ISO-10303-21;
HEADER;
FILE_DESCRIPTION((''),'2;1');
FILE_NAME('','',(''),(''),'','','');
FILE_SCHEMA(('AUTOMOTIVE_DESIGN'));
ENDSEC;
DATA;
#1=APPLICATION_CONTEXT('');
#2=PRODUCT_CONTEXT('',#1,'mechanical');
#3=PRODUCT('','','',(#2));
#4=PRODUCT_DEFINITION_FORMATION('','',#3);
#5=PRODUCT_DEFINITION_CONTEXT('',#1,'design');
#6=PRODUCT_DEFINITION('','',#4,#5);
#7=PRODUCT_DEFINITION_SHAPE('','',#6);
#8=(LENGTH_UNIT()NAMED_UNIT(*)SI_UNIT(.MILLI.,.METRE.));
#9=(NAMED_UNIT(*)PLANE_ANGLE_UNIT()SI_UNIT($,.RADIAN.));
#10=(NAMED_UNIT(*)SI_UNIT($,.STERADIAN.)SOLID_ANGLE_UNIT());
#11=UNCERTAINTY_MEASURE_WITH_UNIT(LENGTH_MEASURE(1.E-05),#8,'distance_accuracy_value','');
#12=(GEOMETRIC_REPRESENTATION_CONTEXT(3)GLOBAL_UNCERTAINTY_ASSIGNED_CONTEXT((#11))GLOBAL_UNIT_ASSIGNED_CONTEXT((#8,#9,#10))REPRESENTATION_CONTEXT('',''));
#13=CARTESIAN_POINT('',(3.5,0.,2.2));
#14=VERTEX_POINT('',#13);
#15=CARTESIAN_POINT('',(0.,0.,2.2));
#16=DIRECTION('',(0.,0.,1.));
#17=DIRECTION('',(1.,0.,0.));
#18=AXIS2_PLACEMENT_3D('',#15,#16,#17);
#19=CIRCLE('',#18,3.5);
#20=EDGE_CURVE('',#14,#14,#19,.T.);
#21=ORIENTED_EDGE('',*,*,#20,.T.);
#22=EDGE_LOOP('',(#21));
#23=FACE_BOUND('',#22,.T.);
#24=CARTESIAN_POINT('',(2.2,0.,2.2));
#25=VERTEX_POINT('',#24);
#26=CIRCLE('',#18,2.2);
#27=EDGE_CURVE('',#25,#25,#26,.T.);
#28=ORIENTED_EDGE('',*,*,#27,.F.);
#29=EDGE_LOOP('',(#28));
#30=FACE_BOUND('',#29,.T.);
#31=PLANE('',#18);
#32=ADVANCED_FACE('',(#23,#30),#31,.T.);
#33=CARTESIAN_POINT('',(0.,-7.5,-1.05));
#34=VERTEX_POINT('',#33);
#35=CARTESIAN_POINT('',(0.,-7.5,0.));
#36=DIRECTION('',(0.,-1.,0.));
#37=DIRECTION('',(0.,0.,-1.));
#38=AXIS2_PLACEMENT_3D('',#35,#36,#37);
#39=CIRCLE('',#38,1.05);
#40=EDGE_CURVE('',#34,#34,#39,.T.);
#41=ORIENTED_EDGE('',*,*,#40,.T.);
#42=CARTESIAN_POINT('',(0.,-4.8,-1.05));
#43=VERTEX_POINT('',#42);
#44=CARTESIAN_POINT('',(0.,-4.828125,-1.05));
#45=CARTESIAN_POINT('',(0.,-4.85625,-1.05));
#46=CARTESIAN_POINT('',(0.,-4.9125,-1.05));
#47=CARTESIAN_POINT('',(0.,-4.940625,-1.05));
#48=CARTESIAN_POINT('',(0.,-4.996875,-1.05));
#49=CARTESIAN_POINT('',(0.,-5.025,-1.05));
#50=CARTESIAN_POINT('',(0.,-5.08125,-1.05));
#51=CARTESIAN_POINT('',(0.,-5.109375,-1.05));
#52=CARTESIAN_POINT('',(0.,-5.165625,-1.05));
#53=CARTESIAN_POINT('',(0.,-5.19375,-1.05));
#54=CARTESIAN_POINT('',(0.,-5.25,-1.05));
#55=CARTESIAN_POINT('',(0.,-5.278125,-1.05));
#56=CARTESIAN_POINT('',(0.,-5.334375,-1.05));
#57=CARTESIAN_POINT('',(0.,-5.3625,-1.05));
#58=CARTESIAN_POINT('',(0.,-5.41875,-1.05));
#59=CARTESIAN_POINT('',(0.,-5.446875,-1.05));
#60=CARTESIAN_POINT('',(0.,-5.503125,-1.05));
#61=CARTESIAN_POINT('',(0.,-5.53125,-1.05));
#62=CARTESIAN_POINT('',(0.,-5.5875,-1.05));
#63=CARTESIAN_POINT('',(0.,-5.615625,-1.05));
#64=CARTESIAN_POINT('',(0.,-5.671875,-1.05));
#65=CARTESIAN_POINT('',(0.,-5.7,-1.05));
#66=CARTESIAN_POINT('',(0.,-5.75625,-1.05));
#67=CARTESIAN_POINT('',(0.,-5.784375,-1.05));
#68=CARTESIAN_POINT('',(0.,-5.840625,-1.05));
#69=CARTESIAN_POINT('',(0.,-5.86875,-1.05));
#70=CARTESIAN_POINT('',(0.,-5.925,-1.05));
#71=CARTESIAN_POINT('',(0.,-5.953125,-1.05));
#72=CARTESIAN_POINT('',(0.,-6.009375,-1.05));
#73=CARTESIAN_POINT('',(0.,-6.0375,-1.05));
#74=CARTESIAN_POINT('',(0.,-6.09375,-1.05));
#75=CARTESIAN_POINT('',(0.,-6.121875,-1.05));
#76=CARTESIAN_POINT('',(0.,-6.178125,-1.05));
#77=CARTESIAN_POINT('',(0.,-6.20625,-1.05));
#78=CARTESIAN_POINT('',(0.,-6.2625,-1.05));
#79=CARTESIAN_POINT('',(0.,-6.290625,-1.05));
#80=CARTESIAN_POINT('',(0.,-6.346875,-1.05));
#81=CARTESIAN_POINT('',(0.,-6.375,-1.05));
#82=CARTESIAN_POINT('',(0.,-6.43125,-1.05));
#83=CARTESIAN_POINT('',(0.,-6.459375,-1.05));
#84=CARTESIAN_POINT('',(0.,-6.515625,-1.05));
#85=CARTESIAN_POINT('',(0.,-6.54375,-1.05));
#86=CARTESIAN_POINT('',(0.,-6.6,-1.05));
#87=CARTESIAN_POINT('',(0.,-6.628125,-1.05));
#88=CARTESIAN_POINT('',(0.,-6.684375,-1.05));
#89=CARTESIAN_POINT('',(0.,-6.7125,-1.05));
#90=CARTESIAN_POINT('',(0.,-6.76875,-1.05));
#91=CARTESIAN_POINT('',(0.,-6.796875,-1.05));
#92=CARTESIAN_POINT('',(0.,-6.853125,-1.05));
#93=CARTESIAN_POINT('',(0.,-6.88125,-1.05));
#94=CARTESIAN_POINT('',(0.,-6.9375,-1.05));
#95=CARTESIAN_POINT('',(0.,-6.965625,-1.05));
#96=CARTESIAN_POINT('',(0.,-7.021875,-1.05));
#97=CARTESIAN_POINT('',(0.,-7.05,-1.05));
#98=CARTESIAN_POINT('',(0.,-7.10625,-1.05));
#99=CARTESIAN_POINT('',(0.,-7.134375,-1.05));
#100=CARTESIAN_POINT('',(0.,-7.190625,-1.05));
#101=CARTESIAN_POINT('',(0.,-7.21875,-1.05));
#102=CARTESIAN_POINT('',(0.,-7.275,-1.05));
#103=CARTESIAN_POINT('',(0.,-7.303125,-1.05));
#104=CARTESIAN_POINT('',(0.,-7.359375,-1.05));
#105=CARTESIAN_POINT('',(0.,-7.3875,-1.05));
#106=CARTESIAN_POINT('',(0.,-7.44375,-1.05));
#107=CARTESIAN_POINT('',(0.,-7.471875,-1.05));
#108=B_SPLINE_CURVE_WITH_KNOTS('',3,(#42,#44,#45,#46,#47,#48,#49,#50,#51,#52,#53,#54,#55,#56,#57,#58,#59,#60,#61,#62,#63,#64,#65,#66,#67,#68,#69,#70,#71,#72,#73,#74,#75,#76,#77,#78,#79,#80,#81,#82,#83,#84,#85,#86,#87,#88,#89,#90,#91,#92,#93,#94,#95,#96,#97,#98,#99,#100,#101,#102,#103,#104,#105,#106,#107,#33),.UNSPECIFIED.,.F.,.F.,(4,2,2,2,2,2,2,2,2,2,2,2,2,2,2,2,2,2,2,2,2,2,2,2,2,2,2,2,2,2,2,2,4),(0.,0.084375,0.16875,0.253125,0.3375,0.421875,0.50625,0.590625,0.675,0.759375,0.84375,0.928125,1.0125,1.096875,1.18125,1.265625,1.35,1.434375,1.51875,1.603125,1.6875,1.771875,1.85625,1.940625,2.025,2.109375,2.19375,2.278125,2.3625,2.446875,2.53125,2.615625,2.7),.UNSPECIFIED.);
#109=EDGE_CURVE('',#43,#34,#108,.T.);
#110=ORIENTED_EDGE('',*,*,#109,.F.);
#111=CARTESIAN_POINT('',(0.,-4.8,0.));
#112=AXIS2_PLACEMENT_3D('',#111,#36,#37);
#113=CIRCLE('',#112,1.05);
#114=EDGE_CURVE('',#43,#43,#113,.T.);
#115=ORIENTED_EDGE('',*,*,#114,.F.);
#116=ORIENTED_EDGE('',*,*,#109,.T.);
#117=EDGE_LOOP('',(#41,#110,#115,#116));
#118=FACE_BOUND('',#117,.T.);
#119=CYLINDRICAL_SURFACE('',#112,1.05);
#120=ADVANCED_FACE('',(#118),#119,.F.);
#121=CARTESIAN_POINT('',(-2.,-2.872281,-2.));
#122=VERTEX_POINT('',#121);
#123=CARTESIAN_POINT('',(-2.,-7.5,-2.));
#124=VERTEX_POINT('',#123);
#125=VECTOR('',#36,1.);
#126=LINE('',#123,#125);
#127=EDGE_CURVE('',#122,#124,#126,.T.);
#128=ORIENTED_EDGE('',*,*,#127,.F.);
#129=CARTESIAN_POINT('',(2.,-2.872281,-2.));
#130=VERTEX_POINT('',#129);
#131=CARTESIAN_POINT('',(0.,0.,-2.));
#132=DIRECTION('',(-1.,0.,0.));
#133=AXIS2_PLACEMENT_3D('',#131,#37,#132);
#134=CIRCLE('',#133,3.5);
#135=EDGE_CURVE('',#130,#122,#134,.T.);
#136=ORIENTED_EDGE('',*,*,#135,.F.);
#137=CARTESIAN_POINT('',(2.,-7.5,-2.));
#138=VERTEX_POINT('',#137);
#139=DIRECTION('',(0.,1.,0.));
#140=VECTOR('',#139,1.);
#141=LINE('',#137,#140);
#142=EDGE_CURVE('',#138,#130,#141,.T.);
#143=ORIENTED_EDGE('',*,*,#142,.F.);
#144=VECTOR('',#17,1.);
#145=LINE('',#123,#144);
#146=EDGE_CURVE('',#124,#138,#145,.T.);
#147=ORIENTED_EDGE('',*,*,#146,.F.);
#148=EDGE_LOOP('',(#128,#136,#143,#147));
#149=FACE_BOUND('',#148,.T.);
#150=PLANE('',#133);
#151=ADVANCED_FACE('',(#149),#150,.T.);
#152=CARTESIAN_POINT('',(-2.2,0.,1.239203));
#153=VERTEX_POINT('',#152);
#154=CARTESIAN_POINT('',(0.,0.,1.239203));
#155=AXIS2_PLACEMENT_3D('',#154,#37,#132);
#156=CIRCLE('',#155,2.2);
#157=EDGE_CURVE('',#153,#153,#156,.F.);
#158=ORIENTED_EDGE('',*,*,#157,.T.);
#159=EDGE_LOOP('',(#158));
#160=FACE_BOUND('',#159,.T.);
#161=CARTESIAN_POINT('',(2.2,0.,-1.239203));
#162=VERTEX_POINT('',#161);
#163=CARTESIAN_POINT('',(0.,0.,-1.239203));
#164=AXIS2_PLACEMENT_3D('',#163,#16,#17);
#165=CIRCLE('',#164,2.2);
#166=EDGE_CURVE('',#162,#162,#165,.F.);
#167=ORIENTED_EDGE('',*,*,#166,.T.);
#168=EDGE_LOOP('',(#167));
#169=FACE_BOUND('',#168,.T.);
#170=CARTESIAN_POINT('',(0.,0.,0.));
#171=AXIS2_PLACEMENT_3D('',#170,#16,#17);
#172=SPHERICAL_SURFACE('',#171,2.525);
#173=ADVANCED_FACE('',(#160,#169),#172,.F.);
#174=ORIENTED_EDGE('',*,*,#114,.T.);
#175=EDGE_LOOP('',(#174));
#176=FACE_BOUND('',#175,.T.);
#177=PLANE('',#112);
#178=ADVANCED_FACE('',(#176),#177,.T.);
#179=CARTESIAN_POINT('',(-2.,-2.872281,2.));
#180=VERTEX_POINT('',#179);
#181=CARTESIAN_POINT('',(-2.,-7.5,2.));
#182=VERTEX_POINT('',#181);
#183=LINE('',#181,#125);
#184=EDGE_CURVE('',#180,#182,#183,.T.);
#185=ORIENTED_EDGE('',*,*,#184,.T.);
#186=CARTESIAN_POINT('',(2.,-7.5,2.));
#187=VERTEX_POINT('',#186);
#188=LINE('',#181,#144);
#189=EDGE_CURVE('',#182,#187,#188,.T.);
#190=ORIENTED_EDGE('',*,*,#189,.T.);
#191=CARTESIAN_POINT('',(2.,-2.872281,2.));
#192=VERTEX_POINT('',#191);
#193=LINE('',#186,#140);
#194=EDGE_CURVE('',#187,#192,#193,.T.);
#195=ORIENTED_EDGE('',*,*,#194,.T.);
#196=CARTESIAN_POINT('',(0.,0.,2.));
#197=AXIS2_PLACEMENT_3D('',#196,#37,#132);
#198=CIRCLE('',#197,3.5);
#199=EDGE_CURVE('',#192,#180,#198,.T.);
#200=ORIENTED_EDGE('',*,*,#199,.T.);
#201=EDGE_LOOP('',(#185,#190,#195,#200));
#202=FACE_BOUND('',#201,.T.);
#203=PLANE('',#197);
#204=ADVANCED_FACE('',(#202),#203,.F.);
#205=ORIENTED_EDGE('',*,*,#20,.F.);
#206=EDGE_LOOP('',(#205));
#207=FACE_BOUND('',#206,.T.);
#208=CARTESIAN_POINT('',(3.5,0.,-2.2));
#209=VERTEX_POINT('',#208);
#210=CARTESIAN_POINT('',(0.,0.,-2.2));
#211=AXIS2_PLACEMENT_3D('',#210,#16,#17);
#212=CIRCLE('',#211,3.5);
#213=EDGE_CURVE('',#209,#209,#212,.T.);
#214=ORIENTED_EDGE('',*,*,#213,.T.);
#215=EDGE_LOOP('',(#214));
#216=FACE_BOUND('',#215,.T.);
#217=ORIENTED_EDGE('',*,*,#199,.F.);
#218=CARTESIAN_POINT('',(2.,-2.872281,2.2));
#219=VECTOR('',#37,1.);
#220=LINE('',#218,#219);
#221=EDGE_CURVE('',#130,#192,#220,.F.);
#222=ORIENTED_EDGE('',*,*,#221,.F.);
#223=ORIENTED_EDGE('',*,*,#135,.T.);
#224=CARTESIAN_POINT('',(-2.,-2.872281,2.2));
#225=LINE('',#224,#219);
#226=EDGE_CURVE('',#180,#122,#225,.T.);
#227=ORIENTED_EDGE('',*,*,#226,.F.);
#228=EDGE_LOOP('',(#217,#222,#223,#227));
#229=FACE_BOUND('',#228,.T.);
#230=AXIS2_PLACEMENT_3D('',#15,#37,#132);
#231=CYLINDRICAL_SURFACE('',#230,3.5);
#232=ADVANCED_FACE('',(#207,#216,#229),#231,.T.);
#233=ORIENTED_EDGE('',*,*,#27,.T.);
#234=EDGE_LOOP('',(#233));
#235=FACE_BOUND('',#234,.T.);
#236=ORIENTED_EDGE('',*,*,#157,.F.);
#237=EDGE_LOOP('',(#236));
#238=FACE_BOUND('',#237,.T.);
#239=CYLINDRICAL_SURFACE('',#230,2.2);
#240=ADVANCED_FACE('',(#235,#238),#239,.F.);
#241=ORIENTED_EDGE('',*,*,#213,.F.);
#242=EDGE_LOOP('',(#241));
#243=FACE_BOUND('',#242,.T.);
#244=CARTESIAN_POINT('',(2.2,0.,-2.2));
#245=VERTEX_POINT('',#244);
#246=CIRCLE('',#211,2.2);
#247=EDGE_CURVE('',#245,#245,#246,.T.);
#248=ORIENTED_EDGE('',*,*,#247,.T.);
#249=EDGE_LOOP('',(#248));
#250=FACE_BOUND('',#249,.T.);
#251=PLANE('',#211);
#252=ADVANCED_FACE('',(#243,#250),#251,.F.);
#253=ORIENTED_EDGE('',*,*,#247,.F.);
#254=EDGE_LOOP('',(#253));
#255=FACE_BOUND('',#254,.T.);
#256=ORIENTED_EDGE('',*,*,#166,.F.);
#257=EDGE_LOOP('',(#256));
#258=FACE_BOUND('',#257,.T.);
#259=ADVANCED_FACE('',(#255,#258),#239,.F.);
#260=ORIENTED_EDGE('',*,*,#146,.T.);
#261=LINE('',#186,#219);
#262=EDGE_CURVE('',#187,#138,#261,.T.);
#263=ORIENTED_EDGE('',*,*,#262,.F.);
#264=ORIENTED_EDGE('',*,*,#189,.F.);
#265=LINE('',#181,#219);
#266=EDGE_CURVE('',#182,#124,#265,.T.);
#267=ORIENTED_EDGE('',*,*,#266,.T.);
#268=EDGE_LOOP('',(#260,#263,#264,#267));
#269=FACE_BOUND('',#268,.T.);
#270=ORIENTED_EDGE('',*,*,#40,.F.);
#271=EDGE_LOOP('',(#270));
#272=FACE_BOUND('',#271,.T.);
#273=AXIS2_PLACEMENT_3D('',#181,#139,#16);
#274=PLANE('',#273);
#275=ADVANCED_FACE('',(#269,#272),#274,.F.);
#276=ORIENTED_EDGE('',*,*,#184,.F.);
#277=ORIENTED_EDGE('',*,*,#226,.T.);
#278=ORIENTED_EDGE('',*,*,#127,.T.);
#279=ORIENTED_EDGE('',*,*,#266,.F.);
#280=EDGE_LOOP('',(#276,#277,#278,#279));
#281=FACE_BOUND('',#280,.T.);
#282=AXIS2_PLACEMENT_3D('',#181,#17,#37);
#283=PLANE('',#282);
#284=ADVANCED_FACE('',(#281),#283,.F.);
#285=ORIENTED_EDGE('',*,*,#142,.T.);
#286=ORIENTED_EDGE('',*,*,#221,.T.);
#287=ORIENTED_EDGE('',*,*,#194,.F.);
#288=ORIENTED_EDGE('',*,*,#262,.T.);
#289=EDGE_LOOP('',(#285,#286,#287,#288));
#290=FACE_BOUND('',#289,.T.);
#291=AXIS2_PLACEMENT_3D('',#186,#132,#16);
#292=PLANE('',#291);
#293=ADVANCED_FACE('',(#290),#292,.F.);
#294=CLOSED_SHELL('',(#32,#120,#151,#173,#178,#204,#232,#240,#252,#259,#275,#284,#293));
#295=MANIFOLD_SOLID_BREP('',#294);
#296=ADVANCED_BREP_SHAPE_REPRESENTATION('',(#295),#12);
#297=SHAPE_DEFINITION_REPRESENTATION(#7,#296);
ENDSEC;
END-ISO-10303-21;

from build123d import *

# Parameters (mm, degrees)
SOCKET_OUTER_EYE_AND_MOUTHS_START = -2.2
SKETCH1_R                         = 3.5
SKETCH1_R_2                       = 2.2
SOCKET_OUTER_EYE_AND_MOUTHS_DEPTH = 4.4
ROD_CONNECTION_NECK_START         = -2
SKETCH2_W                         = 4
SKETCH2_H                         = 5.3
ROD_CONNECTION_NECK_DEPTH         = 4
SKETCH3_R                         = 1.05
D2P1_ROD_BOND_BORE_DEPTH          = 2.7


# Read off the part's stored shape, not the designer's step: Spherical_Socket_D5p05
with BuildPart() as part:
    # Sketch1 → Socket_Outer_Eye_And_Mouths (new body)
    with BuildSketch(Plane.XY.offset(SOCKET_OUTER_EYE_AND_MOUTHS_START)):
        Circle(SKETCH1_R)
        Circle(SKETCH1_R_2, mode=Mode.SUBTRACT)
    extrude(amount=SOCKET_OUTER_EYE_AND_MOUTHS_DEPTH)

    # Sketch2 → Rod_Connection_Neck (add)
    with BuildSketch(Plane.XY.offset(ROD_CONNECTION_NECK_START)):
        with Locations((0, -4.85)):
            Rectangle(SKETCH2_W, SKETCH2_H)
    extrude(amount=ROD_CONNECTION_NECK_DEPTH)

    # Spherical_Socket_D5p05 outline → Spherical_Socket_D5p05 (revolve, cut)
    with BuildSketch(Plane.XZ):
        with BuildLine():
            Line((2.199999999, 1.239203375), (2.199999999, -1.239203375))
            ThreePointArc((2.199999999, -1.239203375), (2.525, 0), (2.199999999, 1.239203375))
        make_face()
    revolve(axis=Axis((0, 0, 0), (0, 0, 1)), mode=Mode.SUBTRACT)

    # Sketch3 → D2p1_Rod_Bond_Bore (cut)
    with BuildSketch(Plane.XZ.offset(7.5)):
        with Locations(Location((0, 0, 0), (0, 0, 270))):
            Circle(SKETCH3_R)
    extrude(amount=-D2P1_ROD_BOND_BORE_DEPTH, mode=Mode.SUBTRACT)


solid = part.part
